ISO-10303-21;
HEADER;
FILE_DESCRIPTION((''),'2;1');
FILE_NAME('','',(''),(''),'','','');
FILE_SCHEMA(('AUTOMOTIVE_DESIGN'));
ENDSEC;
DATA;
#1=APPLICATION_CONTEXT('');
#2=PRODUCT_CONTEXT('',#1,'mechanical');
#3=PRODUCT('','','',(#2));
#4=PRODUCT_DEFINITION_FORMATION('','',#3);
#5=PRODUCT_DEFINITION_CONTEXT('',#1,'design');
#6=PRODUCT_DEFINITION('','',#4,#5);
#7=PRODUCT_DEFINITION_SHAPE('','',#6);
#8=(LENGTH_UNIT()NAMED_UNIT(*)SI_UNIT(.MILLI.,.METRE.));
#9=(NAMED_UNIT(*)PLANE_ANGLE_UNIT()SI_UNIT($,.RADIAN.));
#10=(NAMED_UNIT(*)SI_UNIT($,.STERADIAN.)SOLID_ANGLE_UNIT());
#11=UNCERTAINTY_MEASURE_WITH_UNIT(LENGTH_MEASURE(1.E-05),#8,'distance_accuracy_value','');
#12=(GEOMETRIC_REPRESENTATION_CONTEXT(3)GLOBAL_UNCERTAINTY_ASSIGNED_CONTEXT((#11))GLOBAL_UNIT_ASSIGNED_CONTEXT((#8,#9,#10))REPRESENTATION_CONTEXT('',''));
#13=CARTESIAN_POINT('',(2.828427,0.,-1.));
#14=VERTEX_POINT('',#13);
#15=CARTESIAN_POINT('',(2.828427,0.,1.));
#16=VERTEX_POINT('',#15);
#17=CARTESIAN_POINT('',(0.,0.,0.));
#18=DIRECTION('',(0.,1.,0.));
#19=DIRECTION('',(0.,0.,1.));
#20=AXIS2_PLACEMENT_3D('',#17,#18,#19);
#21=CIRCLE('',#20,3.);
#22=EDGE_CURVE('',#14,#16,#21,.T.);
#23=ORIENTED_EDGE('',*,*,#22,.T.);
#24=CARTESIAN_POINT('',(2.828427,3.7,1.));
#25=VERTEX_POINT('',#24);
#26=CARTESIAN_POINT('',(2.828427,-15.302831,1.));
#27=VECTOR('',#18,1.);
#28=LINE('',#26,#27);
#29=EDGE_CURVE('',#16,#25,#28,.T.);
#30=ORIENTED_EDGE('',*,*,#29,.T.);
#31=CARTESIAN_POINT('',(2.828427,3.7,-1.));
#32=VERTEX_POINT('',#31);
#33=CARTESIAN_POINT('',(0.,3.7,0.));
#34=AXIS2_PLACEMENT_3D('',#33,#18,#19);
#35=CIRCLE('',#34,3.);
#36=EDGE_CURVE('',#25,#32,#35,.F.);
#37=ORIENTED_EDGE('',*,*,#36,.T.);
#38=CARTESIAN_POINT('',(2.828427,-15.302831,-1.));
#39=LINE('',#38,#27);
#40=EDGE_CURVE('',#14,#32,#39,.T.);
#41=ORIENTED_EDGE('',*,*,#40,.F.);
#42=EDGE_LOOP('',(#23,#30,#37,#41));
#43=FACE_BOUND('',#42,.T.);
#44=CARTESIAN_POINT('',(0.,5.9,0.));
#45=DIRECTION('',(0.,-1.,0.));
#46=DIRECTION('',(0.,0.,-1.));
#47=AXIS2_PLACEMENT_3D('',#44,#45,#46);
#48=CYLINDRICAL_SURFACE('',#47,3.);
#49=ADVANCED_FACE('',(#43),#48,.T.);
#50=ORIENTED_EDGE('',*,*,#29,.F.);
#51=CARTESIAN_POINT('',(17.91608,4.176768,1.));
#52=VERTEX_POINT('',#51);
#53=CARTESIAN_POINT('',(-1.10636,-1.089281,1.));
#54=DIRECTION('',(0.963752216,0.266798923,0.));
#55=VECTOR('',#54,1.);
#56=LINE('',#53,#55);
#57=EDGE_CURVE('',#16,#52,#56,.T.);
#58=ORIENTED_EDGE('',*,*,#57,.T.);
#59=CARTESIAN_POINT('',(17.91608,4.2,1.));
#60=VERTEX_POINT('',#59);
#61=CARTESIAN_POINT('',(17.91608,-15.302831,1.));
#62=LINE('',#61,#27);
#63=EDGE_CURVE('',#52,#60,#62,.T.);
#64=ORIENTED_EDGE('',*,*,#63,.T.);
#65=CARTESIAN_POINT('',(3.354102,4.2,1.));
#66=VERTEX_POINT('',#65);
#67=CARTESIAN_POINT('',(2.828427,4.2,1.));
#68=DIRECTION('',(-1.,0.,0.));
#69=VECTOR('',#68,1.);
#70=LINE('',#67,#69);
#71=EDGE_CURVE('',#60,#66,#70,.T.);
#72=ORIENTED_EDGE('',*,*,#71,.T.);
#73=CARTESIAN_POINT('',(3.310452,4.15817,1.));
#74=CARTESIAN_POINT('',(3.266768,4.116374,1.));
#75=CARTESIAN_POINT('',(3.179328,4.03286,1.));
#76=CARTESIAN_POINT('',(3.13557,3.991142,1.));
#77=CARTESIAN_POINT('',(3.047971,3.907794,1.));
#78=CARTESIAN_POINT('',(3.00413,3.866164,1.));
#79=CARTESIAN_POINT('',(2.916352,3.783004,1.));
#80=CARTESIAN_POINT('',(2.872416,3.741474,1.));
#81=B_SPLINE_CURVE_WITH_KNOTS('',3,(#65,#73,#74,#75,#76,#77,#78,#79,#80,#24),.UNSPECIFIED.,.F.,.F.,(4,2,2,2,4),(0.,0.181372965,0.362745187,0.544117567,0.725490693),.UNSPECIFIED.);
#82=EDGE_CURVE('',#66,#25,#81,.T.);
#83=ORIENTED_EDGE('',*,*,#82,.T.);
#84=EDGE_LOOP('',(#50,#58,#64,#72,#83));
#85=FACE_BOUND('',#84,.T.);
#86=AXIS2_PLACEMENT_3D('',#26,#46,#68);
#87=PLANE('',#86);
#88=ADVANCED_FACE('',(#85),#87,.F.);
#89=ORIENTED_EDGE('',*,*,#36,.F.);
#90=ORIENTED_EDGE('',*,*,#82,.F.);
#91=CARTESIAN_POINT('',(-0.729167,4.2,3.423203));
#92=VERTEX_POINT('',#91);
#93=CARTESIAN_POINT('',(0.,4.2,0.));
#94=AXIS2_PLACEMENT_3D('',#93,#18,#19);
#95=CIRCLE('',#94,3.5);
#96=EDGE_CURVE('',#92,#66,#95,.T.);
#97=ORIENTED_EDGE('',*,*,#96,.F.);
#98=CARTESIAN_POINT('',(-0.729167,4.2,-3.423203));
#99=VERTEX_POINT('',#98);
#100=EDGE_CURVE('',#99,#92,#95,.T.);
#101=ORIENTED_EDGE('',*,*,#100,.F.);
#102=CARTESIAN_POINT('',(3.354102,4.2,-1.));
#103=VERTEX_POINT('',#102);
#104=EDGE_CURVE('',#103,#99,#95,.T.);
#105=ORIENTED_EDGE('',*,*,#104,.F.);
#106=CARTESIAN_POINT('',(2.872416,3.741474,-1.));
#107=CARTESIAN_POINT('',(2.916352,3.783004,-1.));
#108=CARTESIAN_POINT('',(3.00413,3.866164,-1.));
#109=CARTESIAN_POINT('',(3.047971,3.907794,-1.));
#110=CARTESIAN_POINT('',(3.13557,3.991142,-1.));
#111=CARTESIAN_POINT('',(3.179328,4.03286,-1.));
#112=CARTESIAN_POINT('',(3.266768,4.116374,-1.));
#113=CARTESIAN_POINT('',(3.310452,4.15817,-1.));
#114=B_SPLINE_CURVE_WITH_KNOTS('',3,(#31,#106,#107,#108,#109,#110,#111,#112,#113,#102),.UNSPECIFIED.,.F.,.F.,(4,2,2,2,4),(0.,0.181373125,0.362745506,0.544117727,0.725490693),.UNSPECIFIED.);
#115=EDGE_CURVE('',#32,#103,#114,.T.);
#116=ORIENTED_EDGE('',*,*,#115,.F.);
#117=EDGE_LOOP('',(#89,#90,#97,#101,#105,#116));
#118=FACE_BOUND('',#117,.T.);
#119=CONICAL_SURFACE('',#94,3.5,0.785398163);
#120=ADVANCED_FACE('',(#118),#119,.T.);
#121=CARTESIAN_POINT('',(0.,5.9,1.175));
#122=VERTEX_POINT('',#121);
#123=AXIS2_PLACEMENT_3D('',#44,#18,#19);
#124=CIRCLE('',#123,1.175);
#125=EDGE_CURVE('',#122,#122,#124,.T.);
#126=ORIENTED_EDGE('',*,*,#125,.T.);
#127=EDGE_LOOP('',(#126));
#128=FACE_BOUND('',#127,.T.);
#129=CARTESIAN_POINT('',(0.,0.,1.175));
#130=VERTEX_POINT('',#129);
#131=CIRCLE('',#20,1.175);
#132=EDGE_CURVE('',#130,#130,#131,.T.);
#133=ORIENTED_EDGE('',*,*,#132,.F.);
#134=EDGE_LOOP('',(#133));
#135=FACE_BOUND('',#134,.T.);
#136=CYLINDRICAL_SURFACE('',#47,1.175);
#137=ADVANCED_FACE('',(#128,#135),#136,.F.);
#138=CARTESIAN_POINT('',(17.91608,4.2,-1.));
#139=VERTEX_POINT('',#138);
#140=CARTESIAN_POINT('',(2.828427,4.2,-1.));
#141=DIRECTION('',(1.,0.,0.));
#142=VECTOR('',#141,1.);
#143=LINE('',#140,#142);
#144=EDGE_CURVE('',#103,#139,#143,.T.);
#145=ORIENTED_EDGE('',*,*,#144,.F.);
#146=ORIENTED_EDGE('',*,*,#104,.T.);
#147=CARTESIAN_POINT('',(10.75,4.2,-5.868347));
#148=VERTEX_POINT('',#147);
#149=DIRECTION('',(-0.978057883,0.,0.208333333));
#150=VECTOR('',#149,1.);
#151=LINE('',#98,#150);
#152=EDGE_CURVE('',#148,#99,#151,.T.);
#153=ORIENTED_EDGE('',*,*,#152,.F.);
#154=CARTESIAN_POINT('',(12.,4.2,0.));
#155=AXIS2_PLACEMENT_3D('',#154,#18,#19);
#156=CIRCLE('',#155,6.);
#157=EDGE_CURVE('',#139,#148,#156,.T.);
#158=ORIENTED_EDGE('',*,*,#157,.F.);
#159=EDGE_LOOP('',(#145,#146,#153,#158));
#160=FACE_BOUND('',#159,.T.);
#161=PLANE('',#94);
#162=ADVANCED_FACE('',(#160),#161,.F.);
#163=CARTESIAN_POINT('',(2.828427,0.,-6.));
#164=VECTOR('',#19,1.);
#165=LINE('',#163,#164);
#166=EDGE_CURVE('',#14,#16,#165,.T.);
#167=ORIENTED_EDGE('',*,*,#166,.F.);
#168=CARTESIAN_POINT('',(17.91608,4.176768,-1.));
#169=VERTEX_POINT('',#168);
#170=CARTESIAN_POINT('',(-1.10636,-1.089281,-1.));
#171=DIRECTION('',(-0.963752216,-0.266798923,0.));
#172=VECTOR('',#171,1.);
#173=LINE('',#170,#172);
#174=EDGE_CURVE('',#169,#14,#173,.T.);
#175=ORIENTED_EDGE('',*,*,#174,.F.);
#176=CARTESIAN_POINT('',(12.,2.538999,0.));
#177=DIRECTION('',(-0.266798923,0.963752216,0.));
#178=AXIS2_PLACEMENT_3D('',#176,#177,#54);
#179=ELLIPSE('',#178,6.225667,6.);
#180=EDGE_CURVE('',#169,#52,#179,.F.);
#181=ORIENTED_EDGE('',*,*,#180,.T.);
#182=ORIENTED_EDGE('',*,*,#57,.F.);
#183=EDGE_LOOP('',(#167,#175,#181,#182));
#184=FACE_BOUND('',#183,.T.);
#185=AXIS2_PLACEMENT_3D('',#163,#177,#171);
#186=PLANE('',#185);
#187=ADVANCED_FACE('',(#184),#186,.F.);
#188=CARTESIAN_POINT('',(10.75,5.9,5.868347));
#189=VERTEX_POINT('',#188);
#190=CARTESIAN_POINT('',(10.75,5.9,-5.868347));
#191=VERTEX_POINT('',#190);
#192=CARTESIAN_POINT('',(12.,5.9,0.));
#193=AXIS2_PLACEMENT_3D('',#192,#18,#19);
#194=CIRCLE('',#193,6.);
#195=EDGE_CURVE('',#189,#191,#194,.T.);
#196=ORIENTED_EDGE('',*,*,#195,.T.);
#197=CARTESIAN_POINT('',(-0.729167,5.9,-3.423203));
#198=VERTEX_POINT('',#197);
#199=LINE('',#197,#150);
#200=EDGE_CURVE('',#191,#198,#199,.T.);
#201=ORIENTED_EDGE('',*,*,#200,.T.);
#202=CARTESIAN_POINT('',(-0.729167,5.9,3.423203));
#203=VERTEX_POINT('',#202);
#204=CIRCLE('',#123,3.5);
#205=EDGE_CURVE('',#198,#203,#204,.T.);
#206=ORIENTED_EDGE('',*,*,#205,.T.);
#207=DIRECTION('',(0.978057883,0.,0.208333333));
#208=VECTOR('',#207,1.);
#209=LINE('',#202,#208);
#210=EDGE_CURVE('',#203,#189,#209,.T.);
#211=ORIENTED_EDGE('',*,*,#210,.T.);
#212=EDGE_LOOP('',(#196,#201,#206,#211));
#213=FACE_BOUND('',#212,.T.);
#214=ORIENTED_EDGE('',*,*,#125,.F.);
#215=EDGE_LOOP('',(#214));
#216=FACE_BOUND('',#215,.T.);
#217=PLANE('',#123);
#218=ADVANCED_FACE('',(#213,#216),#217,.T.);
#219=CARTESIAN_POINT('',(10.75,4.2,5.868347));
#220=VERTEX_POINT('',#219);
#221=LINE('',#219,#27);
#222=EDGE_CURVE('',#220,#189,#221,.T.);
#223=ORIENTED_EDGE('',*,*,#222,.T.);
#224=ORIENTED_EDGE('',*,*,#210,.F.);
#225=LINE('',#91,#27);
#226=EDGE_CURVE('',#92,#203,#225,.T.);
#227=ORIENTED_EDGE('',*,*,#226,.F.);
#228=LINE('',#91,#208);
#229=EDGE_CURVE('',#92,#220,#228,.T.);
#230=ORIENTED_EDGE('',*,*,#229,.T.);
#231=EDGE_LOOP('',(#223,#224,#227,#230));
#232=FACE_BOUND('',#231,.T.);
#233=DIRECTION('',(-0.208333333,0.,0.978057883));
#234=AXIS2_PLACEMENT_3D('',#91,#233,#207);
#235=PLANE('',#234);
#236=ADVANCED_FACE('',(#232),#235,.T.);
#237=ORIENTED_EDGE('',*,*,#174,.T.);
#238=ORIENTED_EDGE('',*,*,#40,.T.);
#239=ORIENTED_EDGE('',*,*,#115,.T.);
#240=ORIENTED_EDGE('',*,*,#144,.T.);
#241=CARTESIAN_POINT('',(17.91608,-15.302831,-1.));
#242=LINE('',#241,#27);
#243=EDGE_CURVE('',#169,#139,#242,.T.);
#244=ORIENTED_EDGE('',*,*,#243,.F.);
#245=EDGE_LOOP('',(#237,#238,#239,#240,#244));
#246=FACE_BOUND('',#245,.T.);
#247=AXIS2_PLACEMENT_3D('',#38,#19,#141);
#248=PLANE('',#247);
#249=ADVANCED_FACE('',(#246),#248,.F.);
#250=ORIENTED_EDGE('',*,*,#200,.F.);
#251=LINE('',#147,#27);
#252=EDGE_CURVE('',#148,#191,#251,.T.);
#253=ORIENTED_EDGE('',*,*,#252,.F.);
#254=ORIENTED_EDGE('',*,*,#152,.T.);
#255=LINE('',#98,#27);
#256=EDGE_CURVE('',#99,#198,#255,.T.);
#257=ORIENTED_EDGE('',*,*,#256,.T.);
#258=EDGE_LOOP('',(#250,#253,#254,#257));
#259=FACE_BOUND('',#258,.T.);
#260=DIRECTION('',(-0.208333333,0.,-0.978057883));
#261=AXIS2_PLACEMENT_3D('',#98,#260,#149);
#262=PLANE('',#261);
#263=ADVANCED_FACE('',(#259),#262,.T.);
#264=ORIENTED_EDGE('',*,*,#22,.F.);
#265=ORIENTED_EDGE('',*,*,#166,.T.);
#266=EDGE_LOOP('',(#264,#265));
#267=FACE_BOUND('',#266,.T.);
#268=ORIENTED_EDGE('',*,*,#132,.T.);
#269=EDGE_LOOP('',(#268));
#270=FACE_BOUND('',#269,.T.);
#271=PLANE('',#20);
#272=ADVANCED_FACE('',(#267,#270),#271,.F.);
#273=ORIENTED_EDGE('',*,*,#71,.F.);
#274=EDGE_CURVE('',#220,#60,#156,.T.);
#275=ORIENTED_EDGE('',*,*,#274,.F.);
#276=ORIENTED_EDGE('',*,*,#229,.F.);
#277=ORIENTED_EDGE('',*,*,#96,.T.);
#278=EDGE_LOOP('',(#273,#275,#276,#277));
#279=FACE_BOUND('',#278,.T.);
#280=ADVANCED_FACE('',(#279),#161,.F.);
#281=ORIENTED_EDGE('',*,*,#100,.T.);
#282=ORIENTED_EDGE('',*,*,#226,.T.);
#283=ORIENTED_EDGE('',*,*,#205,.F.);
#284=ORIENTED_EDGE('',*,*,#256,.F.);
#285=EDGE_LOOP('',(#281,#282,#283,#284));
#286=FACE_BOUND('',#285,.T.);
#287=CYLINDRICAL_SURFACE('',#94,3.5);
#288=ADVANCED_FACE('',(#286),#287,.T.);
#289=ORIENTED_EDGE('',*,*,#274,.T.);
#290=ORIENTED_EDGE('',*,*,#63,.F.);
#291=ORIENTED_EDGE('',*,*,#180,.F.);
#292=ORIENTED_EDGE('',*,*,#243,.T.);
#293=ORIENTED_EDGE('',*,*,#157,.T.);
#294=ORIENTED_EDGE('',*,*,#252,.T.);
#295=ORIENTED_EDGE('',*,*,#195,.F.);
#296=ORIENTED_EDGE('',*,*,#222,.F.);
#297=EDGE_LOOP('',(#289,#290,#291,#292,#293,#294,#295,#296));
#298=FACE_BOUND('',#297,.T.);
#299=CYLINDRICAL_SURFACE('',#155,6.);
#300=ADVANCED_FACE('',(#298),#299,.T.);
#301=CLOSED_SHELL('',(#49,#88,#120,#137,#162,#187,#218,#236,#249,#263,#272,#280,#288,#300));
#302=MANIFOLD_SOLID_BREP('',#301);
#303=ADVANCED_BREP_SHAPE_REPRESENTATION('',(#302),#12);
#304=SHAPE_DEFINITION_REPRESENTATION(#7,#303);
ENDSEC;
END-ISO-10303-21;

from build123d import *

# Parameters (mm, degrees)
SKETCH1_R               = 3
SKETCH1_R_2             = 1.175
BOSS_EXTRUDE1_DEPTH     = 5.9
BOSS_EXTRUDE2_START     = -1.7
SKETCH3_R               = 1.175
BOSS_EXTRUDE2_DEPTH     = 1.7
BOSS_EXTRUDE3_START     = 4.2
BOSS_EXTRUDE3_DEPTH     = 4.2
CUT_EXTRUDE1_DEPTH      = 20.869826371
CUT_EXTRUDE1_DEPTH_BACK = 20.869826371
CHAMFER2_SIZE           = 0.5


with BuildPart() as part:
    # Sketch1 → Boss-Extrude1 (new body)
    with BuildSketch(Plane(origin=(0, 0, 0), x_dir=(1, 0, 0), z_dir=(0, 1, 0))):
        with Locations(Location((0, 0, 0), (0, 0, 270))):
            Circle(SKETCH1_R)
        with Locations(Location((0, 0, 0), (0, 0, 270))):
            Circle(SKETCH1_R_2, mode=Mode.SUBTRACT)
    extrude(amount=BOSS_EXTRUDE1_DEPTH)

    # Sketch3 → Boss-Extrude2 (add)
    with BuildSketch(Plane(origin=(0, 5.9, 0), x_dir=(1, 0, 0), z_dir=(0, 1, 0)).offset(BOSS_EXTRUDE2_START)):
        with BuildLine():
            Line((-0.729166667, 3.42320259), (10.75, 5.868347297))
            ThreePointArc((10.75, 5.868347297), (18, 0), (10.75, -5.868347297))
            Line((10.75, -5.868347297), (-0.729166667, -3.42320259))
            ThreePointArc((-0.729166667, -3.42320259), (-3.5, 0), (-0.729166667, 3.42320259))
        make_face()
        with Locations(Location((0, 0, 0), (0, 0, 270))):
            Circle(SKETCH3_R, mode=Mode.SUBTRACT)
    extrude(amount=BOSS_EXTRUDE2_DEPTH)

    # Sketch4 → Boss-Extrude3 (add)
    with BuildSketch(Plane.XZ.offset(-4.2).offset(BOSS_EXTRUDE3_START)):
        with BuildLine():
            Line((2.828427125, 1), (17.916079783, 1))
            ThreePointArc((17.916079783, 1), (18, 0), (17.916079783, -1))
            Line((17.916079783, -1), (2.828427125, -1))
            ThreePointArc((2.828427125, -1), (3, 0), (2.828427125, 1))
        make_face()
    extrude(amount=-BOSS_EXTRUDE3_DEPTH)

    # Sketch5 → Cut-Extrude1 (cut, two sides: drawn at the far end of the back side and taken through both)
    with BuildSketch(Plane.XY.offset(-CUT_EXTRUDE1_DEPTH_BACK)):
        Polygon((2.828427125, 0), (18, 4.2), (18, 0), align=None)
    extrude(amount=CUT_EXTRUDE1_DEPTH + CUT_EXTRUDE1_DEPTH_BACK, mode=Mode.SUBTRACT)

    # Chamfer2
    chamfer2_edges = [part.edges().sort_by_distance(p)[0] for p in [
        (-3, 4.2, 0),
    ]]
    chamfer(chamfer2_edges, length=CHAMFER2_SIZE - 0.0001)  # a hair under: the kernel refuses the full size


solid = part.part
